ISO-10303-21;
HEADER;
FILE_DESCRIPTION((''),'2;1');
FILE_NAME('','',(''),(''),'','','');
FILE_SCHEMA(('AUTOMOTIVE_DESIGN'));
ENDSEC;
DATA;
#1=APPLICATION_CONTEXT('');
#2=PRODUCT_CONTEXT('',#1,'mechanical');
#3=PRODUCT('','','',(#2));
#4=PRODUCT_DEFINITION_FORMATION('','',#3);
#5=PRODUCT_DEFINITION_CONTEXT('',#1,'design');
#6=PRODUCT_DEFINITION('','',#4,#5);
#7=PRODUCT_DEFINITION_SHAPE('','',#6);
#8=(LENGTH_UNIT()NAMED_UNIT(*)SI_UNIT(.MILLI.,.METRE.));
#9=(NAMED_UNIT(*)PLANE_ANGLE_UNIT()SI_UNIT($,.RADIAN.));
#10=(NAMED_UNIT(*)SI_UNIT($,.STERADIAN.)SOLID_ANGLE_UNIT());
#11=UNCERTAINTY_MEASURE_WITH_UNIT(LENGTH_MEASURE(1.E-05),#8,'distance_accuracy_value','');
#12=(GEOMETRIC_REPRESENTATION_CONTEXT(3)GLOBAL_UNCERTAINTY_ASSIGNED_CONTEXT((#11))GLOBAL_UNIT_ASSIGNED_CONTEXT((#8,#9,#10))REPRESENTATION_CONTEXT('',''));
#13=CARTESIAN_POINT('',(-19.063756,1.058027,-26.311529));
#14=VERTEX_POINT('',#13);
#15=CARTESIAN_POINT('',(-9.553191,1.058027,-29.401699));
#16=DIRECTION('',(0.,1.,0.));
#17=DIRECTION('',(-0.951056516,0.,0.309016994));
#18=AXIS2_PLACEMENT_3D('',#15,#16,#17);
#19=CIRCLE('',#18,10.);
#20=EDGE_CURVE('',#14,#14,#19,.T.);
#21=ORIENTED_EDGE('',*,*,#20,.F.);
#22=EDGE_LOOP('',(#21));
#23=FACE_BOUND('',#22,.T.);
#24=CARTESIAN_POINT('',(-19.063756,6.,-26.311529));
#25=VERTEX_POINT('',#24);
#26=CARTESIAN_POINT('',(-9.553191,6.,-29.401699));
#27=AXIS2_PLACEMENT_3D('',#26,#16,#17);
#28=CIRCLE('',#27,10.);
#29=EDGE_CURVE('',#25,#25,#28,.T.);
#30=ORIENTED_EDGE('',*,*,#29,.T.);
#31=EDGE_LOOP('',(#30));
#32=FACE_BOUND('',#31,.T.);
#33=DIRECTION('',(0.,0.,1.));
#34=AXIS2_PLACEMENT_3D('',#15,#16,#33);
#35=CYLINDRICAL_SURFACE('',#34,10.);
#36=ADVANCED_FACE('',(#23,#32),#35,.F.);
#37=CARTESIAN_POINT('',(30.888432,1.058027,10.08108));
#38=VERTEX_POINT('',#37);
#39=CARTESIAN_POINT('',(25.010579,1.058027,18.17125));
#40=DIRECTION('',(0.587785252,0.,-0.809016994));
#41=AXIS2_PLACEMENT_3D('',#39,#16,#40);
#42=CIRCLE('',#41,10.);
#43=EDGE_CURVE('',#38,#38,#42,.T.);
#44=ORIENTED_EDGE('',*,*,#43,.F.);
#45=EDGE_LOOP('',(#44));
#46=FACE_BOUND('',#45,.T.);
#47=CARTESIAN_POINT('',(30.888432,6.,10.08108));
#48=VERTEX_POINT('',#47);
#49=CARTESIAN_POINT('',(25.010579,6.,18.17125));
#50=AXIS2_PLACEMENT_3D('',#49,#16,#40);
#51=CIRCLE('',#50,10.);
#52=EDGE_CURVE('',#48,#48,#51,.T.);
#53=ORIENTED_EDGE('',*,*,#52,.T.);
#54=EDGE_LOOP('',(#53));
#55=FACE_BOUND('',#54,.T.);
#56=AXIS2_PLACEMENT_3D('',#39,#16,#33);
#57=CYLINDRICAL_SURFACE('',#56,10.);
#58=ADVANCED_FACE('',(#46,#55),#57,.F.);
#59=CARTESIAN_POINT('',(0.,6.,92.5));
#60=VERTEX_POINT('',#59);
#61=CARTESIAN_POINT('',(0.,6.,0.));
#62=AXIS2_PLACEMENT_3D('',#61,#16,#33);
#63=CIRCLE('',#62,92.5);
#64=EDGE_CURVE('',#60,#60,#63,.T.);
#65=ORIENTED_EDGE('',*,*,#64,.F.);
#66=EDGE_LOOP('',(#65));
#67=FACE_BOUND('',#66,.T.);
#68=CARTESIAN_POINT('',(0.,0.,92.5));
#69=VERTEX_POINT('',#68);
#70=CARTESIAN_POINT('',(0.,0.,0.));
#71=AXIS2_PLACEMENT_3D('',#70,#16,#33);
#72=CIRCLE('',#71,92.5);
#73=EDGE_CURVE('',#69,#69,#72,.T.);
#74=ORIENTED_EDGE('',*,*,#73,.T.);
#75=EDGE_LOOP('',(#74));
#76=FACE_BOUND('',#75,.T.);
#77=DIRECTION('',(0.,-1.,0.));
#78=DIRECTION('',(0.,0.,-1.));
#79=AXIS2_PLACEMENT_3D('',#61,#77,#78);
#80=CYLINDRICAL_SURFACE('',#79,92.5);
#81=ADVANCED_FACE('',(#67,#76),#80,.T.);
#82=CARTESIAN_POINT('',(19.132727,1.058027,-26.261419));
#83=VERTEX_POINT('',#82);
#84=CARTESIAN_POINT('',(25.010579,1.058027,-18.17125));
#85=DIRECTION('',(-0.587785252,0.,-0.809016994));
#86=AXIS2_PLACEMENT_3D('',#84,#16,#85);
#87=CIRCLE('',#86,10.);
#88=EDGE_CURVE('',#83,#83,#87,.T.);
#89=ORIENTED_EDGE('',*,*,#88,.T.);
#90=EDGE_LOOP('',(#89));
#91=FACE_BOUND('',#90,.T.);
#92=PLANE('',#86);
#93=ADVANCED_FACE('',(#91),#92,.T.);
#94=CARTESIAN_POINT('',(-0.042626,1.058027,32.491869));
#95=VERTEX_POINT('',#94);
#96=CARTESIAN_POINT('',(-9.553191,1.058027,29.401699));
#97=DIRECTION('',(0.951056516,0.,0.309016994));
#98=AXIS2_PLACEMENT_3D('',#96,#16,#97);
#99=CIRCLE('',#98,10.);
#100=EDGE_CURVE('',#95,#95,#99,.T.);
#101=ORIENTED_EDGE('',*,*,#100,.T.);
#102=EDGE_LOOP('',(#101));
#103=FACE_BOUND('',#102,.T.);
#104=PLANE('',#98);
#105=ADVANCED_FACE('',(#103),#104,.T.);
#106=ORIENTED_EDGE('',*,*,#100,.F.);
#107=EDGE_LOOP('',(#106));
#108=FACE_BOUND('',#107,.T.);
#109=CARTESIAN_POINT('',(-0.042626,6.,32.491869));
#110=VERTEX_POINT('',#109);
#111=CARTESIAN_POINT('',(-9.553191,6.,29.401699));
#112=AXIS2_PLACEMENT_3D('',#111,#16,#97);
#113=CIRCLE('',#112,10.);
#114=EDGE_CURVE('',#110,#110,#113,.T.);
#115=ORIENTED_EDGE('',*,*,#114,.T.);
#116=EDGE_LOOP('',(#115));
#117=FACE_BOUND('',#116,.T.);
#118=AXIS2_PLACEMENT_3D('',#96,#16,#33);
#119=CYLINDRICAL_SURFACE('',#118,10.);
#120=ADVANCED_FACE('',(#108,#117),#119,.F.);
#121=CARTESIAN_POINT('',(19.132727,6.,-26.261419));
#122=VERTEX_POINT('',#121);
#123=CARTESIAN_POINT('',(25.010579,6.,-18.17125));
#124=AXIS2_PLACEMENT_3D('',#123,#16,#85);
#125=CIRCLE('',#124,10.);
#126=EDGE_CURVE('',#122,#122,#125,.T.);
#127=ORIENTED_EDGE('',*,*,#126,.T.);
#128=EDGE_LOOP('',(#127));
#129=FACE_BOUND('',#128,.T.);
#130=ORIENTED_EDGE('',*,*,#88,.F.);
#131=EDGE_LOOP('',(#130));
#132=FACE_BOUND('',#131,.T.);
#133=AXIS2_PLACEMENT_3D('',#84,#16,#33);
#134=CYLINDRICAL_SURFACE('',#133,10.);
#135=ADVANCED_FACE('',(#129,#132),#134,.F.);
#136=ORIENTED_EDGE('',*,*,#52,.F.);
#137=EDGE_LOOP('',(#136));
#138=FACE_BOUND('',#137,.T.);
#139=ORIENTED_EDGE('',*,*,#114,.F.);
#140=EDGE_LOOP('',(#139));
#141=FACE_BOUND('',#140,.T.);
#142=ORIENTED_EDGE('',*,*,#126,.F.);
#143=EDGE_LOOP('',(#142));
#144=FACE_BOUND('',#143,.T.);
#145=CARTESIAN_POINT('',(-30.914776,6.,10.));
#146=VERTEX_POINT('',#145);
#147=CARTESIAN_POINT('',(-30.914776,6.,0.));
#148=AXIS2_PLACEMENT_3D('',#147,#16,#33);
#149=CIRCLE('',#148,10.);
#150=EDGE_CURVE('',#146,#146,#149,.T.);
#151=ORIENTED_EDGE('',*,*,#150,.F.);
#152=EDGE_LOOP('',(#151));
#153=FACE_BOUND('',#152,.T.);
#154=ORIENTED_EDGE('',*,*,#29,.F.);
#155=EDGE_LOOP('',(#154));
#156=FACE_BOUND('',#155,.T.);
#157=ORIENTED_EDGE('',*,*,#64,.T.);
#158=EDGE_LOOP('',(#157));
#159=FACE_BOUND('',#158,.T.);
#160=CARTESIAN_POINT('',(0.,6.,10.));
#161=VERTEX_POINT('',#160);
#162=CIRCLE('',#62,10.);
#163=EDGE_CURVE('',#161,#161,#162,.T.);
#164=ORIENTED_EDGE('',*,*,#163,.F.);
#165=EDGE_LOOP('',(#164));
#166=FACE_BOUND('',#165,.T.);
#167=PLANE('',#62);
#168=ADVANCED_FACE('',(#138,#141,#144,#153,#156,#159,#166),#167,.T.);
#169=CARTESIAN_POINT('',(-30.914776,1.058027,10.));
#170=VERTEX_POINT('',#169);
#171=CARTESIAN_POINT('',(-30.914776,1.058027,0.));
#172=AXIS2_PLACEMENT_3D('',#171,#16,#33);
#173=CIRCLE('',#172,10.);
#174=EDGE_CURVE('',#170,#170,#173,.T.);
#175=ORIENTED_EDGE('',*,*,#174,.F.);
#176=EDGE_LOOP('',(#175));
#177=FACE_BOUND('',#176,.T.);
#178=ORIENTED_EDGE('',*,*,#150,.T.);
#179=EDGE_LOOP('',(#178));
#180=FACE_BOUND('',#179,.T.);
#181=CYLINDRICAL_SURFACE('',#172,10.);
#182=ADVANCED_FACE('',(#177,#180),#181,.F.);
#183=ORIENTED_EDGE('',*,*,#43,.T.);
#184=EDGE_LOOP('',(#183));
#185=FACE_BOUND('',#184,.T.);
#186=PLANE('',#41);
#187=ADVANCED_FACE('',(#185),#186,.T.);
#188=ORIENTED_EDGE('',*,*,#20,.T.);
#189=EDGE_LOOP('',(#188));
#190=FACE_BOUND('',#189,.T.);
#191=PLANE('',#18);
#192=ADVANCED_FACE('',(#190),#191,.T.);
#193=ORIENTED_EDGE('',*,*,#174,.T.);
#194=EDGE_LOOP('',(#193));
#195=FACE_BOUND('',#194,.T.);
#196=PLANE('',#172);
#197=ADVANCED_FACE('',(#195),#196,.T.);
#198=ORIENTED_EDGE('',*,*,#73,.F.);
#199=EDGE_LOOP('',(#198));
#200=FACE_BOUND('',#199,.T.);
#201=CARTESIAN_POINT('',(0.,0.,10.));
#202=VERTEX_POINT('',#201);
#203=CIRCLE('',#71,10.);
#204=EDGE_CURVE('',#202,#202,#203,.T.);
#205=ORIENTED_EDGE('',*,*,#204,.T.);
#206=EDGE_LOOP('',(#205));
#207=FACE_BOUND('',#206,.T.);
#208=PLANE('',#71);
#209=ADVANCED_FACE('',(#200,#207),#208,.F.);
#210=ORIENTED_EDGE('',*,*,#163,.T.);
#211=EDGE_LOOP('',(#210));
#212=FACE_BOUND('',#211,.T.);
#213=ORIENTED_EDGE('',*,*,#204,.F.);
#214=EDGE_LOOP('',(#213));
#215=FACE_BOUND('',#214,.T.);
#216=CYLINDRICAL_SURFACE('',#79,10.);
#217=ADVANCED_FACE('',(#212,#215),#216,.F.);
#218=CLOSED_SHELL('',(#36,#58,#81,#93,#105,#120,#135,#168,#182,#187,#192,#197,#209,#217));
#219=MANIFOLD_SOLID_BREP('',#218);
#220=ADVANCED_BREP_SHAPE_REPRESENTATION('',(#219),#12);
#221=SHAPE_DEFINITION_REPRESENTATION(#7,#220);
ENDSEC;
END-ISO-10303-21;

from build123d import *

# Parameters (mm, degrees)
SKETCH1_R           = 92.5
BOSS_EXTRUDE1_DEPTH = 6
SKETCH2_R           = 10
CUT_EXTRUDE1_DEPTH  = 131.952281385
SKETCH3_R           = 10
CUT_EXTRUDE2_DEPTH  = 4.941973012
CIRPATTERN1_COUNT   = 5


with BuildPart() as part:
    # Sketch1 → Boss-Extrude1 (new body)
    with BuildSketch(Plane(origin=(0, 0, 0), x_dir=(1, 0, 0), z_dir=(0, 1, 0))):
        Circle(SKETCH1_R)
    extrude(amount=BOSS_EXTRUDE1_DEPTH)

    # Sketch2 → Cut-Extrude1 (cut, through all)
    with BuildSketch(Plane(origin=(0, 0, 0), x_dir=(1, 0, 0), z_dir=(0, 1, 0))):
        Circle(SKETCH2_R)
    extrude(amount=CUT_EXTRUDE1_DEPTH, mode=Mode.SUBTRACT)

    # Sketch3 → Cut-Extrude2 (cut)
    with BuildSketch(Plane(origin=(0, 6, 0), x_dir=(1, 0, 0), z_dir=(0, 1, 0))):
        with Locations((-30.914776162, 0)):
            Circle(SKETCH3_R)
    cut_extrude2 = extrude(amount=-CUT_EXTRUDE2_DEPTH, mode=Mode.SUBTRACT)

    # CirPattern1: Cut-Extrude2 ×5 about axis
    cirpattern1_axis = Axis((0, 0, 0), (0, 1, 0))
    for i in range(1, CIRPATTERN1_COUNT):
        add(cut_extrude2.rotate(cirpattern1_axis, i * 360 / CIRPATTERN1_COUNT), mode=Mode.SUBTRACT)


solid = part.part
